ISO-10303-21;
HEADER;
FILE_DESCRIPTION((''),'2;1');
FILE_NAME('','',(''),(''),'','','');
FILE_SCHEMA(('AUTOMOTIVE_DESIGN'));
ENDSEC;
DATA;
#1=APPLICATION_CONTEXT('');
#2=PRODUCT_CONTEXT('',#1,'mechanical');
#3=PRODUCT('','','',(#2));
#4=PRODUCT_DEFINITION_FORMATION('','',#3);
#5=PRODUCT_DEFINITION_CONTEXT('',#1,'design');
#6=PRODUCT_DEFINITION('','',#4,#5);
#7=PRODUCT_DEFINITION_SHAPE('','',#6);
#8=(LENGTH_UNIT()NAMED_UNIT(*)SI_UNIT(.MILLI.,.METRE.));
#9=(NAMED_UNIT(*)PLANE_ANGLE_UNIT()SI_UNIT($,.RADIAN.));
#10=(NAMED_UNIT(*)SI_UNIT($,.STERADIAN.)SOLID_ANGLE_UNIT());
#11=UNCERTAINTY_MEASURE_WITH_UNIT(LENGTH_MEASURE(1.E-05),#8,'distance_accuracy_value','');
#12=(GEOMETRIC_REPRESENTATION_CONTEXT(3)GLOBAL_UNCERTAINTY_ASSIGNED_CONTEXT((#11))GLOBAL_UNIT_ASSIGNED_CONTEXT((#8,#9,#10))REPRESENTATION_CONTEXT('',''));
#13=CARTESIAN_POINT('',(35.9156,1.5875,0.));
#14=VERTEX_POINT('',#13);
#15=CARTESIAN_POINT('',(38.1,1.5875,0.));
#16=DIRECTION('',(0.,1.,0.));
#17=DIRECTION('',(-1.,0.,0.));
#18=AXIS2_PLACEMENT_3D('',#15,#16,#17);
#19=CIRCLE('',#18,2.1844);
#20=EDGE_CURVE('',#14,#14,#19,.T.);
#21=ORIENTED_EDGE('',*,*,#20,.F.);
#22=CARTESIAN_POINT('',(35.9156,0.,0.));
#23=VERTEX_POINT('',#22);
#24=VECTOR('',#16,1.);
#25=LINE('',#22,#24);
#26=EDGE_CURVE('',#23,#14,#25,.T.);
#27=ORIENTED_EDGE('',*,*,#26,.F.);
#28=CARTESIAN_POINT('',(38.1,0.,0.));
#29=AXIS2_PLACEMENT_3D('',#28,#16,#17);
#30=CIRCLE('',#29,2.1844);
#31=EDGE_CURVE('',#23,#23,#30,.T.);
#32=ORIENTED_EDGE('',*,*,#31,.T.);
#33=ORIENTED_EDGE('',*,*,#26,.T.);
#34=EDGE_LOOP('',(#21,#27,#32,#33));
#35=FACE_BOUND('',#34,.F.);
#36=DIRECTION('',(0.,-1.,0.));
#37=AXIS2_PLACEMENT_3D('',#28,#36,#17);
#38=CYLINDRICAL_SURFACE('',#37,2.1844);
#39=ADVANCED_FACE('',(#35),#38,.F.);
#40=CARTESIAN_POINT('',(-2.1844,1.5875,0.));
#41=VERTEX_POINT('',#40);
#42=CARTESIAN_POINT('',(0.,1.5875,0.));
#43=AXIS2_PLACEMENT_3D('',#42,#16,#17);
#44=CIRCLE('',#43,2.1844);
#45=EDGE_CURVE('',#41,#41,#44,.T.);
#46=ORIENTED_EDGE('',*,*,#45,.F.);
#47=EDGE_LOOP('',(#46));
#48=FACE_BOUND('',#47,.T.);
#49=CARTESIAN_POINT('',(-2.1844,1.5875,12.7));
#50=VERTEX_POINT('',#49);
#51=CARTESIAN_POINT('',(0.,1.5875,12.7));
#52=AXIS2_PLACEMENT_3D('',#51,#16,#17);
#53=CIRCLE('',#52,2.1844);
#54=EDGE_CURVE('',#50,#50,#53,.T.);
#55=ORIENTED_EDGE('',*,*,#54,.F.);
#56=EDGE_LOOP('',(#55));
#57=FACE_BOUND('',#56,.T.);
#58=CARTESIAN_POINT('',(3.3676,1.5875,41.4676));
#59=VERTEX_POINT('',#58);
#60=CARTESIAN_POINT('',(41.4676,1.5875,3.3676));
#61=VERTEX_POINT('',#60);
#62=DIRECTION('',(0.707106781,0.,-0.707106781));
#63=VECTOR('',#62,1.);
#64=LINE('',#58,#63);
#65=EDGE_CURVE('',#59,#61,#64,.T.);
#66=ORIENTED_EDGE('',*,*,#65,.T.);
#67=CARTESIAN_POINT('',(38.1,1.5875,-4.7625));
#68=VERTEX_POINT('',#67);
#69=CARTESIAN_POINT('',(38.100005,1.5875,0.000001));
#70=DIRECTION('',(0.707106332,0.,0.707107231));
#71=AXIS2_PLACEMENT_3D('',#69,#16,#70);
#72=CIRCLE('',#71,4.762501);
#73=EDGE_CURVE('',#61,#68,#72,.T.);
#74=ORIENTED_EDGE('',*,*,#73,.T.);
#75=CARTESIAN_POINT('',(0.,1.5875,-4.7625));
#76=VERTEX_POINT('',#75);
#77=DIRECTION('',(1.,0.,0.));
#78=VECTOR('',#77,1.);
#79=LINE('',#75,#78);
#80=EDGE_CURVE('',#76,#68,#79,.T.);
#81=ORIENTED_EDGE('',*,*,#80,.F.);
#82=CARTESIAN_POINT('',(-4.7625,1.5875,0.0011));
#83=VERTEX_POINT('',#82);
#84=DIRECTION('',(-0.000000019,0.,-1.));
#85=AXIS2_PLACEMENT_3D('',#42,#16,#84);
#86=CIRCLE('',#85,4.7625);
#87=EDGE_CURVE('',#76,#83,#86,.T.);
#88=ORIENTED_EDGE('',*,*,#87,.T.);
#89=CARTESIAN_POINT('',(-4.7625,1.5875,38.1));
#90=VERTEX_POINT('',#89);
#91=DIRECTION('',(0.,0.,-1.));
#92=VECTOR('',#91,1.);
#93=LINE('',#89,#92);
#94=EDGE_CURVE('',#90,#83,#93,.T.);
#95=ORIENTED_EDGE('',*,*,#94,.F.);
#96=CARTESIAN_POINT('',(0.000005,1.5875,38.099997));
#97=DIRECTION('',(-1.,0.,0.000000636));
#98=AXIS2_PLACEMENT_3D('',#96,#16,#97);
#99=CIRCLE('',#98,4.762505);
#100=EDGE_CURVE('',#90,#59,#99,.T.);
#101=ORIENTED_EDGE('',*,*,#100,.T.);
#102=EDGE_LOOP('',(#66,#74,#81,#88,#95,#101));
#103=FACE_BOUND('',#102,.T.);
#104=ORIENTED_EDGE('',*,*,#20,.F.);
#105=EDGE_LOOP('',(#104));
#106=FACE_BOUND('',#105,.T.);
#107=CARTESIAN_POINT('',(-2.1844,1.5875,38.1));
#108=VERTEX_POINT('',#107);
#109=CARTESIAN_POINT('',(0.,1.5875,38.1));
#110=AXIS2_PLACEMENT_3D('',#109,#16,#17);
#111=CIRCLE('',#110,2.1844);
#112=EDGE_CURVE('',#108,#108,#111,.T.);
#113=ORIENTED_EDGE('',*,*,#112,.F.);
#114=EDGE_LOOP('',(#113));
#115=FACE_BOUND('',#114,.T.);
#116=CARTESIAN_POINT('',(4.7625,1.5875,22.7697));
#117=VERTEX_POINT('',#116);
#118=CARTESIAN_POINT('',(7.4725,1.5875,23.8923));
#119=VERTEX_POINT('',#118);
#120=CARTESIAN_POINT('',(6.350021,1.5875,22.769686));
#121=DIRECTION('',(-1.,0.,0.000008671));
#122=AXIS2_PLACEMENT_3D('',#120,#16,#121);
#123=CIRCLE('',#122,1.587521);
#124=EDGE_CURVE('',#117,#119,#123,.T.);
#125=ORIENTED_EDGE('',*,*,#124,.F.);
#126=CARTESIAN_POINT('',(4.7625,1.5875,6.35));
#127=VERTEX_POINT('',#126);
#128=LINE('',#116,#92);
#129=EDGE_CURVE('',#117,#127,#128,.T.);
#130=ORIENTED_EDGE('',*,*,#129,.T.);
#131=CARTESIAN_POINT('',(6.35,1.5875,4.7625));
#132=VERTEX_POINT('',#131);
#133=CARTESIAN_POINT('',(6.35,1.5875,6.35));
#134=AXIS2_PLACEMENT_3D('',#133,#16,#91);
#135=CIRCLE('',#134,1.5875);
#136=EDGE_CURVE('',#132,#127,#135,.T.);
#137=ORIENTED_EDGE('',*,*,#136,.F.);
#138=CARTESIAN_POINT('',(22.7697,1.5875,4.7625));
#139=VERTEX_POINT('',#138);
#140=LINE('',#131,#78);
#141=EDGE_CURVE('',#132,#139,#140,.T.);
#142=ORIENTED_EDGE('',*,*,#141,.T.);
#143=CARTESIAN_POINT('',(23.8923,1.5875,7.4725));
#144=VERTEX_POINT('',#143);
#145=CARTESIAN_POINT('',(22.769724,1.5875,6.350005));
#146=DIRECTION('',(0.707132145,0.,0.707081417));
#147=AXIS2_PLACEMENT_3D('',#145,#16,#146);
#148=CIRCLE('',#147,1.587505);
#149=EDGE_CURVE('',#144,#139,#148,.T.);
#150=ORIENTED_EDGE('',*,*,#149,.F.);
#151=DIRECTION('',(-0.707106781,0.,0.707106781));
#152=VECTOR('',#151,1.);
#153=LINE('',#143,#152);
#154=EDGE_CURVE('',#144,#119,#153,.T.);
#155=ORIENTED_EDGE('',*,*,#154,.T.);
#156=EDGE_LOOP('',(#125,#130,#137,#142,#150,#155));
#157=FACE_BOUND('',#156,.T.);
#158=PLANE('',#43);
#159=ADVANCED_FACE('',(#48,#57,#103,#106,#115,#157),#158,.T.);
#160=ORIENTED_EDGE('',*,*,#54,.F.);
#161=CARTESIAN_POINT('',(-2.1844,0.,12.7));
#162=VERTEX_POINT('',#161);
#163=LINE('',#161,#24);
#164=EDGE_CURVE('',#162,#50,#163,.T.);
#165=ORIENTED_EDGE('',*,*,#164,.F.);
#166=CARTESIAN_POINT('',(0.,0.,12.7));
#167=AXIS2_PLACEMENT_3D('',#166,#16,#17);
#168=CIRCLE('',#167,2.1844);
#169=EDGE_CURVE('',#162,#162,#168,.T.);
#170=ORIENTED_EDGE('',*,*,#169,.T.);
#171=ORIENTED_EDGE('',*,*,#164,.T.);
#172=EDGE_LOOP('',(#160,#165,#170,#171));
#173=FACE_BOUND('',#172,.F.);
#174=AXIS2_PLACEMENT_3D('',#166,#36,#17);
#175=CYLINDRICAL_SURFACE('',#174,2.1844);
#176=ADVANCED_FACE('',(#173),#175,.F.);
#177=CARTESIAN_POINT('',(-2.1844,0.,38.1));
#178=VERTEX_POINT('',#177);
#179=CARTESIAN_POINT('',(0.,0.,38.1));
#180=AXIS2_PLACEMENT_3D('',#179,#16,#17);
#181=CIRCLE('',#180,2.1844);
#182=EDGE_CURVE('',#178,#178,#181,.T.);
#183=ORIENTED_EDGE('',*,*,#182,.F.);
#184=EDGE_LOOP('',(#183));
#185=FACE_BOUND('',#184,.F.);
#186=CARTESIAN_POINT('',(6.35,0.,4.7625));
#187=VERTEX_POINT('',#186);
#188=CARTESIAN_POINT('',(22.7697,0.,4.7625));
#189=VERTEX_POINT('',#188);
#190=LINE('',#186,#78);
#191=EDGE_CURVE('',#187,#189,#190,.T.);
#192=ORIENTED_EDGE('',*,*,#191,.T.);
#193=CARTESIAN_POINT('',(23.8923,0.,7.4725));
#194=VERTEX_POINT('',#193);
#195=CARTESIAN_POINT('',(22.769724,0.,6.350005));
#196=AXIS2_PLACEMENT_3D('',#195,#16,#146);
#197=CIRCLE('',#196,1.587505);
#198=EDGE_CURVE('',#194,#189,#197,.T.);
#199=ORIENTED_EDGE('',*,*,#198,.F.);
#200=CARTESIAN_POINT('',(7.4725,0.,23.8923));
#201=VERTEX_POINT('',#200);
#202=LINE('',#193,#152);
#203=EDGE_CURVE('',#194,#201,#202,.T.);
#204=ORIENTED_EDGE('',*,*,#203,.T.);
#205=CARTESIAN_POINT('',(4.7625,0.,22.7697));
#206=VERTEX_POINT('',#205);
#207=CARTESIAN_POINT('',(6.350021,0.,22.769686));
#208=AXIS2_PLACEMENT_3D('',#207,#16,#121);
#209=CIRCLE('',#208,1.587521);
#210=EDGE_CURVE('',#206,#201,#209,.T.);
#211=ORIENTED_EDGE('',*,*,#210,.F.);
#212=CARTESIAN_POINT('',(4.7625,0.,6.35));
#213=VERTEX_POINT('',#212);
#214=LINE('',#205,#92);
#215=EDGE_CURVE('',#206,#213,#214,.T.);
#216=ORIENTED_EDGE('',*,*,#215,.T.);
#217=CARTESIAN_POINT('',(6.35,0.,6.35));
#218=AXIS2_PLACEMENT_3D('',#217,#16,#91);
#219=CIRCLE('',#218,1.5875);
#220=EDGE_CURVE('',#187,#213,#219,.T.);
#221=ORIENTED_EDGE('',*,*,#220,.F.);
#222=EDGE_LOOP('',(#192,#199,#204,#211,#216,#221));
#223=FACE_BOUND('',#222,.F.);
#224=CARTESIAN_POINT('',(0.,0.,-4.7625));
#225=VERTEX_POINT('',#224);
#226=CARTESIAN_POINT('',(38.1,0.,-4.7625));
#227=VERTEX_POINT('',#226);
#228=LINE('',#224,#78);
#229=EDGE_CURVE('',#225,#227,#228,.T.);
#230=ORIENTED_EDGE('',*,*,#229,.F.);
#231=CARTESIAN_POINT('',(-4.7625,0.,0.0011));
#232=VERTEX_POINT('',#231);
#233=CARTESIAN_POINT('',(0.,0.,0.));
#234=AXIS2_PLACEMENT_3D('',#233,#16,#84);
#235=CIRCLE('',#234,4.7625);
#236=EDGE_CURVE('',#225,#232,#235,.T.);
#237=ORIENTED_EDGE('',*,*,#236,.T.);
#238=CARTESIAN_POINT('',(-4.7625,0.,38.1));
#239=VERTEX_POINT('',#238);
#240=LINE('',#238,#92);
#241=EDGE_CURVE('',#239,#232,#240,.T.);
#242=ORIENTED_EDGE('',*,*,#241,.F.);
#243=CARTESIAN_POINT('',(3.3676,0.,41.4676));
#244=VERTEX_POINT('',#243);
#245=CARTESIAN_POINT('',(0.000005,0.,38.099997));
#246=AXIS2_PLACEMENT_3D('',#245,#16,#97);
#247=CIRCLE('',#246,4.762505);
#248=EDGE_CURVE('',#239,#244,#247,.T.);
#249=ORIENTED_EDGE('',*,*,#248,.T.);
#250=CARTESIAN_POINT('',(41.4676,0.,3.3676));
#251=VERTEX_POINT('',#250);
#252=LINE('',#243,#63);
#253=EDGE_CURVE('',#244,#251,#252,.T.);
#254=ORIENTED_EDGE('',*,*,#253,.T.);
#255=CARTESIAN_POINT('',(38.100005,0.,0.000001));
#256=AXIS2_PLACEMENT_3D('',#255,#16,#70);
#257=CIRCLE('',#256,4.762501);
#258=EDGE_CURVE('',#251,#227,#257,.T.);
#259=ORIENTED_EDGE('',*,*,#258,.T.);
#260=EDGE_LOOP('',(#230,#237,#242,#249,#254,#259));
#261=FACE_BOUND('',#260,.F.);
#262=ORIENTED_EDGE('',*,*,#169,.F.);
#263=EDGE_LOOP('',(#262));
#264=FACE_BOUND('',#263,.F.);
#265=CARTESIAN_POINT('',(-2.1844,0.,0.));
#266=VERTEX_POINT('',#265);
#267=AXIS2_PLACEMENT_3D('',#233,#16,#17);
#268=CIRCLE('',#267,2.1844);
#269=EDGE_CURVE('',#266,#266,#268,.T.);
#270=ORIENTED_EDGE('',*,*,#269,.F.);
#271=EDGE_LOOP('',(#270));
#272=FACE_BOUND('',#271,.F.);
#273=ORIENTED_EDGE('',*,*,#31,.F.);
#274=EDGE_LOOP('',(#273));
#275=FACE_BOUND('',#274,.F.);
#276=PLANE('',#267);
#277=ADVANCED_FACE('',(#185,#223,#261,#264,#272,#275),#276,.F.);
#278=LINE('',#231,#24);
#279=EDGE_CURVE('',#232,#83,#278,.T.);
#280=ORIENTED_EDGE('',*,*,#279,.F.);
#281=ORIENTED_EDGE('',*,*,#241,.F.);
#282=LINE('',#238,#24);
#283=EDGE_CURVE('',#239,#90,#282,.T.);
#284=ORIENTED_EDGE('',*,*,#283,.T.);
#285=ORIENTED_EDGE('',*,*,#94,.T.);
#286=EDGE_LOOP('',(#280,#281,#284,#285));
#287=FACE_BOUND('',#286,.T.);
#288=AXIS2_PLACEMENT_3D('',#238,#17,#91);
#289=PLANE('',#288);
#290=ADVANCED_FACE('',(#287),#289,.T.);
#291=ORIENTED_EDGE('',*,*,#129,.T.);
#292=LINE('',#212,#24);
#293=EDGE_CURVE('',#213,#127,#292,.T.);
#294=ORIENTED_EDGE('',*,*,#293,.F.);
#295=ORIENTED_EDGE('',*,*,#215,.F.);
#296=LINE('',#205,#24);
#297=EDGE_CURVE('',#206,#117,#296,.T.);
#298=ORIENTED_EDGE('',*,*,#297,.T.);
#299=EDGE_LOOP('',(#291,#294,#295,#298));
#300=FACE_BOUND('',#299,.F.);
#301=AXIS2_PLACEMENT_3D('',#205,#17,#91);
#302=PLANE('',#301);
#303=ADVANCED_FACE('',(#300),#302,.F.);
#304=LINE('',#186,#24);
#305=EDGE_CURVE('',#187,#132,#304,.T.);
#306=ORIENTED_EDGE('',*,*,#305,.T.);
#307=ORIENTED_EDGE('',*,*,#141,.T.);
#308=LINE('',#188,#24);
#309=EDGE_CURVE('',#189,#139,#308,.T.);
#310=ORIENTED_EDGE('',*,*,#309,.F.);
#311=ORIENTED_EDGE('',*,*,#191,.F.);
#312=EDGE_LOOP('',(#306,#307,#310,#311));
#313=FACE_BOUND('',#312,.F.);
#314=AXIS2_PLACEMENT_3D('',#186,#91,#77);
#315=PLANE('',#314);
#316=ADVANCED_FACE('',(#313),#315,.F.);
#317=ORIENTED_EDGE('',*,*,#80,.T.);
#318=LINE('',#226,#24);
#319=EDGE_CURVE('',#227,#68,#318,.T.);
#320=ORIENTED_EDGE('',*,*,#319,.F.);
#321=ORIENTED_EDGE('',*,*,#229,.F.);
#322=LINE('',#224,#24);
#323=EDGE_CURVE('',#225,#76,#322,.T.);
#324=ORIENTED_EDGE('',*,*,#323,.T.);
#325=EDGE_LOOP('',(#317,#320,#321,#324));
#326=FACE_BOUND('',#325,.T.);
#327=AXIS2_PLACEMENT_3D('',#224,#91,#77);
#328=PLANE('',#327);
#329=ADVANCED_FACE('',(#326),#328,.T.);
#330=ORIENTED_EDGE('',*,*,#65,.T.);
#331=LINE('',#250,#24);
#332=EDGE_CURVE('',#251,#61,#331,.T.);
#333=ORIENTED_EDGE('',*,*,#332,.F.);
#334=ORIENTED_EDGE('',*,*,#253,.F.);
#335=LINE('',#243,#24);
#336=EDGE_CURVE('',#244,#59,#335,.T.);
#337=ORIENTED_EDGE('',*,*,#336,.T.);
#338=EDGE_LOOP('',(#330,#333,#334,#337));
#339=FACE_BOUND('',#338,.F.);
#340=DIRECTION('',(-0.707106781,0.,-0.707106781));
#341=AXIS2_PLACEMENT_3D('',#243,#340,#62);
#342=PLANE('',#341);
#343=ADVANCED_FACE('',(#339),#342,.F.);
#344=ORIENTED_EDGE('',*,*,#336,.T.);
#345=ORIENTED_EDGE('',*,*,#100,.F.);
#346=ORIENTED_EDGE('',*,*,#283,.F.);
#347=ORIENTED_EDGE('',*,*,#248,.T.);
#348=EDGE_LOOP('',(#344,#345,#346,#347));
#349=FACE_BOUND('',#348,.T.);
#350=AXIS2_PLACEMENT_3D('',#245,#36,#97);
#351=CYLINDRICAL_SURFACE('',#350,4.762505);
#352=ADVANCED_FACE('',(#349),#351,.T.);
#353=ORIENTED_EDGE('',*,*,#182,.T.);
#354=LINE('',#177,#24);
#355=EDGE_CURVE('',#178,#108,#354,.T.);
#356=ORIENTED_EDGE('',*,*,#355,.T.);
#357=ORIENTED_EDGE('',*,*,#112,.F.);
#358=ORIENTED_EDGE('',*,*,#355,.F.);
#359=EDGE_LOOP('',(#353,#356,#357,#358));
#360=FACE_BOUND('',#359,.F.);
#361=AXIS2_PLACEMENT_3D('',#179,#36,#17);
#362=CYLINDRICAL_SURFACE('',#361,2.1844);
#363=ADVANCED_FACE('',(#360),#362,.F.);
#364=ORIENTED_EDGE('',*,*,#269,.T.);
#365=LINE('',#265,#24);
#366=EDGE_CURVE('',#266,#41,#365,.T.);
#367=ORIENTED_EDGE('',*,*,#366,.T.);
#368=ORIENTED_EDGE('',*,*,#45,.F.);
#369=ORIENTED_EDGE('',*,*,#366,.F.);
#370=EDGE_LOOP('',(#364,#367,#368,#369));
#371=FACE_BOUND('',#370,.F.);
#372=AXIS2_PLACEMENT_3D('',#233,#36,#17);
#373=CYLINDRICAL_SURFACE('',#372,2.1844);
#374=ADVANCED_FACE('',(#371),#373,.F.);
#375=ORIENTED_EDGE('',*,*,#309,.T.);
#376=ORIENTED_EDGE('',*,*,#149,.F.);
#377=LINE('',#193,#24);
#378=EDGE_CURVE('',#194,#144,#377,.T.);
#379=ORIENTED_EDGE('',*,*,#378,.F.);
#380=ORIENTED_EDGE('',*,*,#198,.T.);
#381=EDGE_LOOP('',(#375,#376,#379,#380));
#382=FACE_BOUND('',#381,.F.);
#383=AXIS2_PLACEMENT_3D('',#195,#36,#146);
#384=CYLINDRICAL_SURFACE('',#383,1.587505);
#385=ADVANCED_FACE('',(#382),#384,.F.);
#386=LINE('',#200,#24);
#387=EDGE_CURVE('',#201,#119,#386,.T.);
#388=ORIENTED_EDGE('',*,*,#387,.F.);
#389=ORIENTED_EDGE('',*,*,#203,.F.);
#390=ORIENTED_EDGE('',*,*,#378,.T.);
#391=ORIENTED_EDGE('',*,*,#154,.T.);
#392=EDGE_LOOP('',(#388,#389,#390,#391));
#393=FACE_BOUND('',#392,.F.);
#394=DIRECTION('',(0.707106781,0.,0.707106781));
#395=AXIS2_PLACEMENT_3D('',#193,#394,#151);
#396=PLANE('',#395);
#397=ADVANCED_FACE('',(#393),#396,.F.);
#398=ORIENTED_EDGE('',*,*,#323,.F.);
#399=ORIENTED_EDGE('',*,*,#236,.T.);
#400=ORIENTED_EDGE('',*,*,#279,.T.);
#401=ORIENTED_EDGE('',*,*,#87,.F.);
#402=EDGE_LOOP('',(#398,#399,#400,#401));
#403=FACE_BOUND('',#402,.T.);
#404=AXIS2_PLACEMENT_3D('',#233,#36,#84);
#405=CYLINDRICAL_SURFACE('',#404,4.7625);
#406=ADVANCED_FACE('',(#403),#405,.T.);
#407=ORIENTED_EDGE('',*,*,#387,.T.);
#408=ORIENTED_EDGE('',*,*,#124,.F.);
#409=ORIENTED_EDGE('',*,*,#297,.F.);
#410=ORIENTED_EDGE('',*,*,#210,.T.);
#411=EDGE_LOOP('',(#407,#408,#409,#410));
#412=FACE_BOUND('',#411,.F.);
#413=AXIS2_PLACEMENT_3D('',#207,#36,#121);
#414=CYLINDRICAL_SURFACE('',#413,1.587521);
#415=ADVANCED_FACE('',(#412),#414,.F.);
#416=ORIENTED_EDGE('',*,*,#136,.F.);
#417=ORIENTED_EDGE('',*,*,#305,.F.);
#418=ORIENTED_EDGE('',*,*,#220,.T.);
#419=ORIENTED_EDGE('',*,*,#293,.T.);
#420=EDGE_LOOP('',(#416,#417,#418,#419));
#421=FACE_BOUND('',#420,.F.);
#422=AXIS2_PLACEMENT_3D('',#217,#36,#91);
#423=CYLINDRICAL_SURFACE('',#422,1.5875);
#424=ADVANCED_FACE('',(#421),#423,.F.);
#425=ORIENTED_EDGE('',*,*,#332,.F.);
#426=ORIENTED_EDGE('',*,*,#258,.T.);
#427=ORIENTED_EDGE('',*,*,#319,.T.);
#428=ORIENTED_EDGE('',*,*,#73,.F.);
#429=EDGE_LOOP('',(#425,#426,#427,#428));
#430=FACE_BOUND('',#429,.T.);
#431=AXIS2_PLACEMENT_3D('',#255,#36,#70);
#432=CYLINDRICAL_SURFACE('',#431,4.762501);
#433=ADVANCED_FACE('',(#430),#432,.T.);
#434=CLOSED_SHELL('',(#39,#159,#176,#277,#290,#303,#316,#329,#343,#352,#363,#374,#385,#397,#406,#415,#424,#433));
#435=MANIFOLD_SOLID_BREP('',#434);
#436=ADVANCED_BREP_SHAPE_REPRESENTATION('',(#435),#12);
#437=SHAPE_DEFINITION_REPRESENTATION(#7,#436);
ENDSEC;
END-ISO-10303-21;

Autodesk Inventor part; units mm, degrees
ref_plane "YZ Plane" through (0, 0, 0) normal (1, 0, 0) x (0, 1, 0)
ref_plane "XZ Plane" through (0, 0, 0) normal (0, 1, 0) x (-1, 0, 0)
ref_plane "XY Plane" through (0, 0, 0) normal (0, 0, 1) x (1, 0, 0)
sketch "main" plane through (0, 0, 0) normal (0, 0, 1) x (1, 0, 0)
  circle A0 centre (19.7324, 21.1672) radius 2.1844
  circle A1 centre (19.7324, -16.9328) radius 2.1844
  circle A2 centre (-18.3676, -16.9328) radius 2.1844
  arc A3 (24.4949, 21.1672) -> (16.3648, 24.5348) centre (19.7324, 21.1672) ccw
  arc A4 (-21.7352, -13.5652) -> (-18.3676, -21.6953) centre (-18.3676, -16.9328) ccw
  arc A5 (19.7324, -21.6953) -> (24.4949, -16.9317) centre (19.7324, -16.9328) ccw
  line L0 (19.7324, -21.6953) -> (-18.3676, -21.6953)
  line L1 (24.4949, 21.1672) -> (24.4949, -16.9317)
  line L2 (16.3648, 24.5348) -> (-21.7352, -13.5652)
  line L3 (13.3824, -12.1703) -> (-3.0373, -12.1703)
  line L4 (-4.1599, -9.4602) -> (12.2599, 6.9595)
  line L5 (14.9699, 5.837) -> (14.9699, -10.5828)
  arc A6 (13.3824, -12.1703) -> (14.9699, -10.5828) centre (13.3824, -10.5828) ccw
  arc A7 (14.9699, 5.837) -> (12.2599, 6.9595) centre (13.3824, 5.837) ccw
  arc A8 (-4.1599, -9.4602) -> (-3.0373, -12.1703) centre (-3.0373, -10.5828) ccw
  circle A9 centre (19.7324, -4.2328) radius 2.1844
  point P0 (6.6792, -3.8964)
  dimension "d0" = 9.525
  dimension "d1" = 9.525
  dimension "d2" = 9.525
  dimension "d5" = 9.525
  dimension "d6" = 1.5875
  dimension "d7" = 1.5875
  dimension "d11" = 4.3688
sketch "Sketch1" plane through (0, 0, 0) normal (0, 1, 0) x (-1, 0, 0)
  circle A0 centre (0, 38.1) radius 2.1844
  circle A1 centre (0, 0) radius 2.1844
  circle A2 centre (-38.1, 0) radius 2.1844
  arc A3 (4.7625, 38.1) -> (-3.3676, 41.4676) centre (0, 38.1) ccw
  arc A4 (-41.4676, 3.3676) -> (-38.1, -4.7625) centre (-38.1, 0) ccw
  arc A5 (0, -4.7625) -> (4.7625, 0.0011) centre (0, 0) ccw
  line L0 (0, -4.7625) -> (-38.1, -4.7625)
  line L1 (4.7625, 38.1) -> (4.7625, 0.0011)
  line L2 (-3.3676, 41.4676) -> (-41.4676, 3.3676)
  line L3 (-6.35, 4.7625) -> (-22.7697, 4.7625)
  line L4 (-23.8923, 7.4725) -> (-7.4725, 23.8923)
  line L5 (-4.7625, 22.7697) -> (-4.7625, 6.35)
  arc A6 (-6.35, 4.7625) -> (-4.7625, 6.35) centre (-6.35, 6.35) ccw
  arc A7 (-4.7625, 22.7697) -> (-7.4725, 23.8923) centre (-6.35, 22.7697) ccw
  arc A8 (-23.8923, 7.4725) -> (-22.7697, 4.7625) centre (-22.7697, 6.35) ccw
  circle A9 centre (0, 12.7) radius 2.1844
extrude "Extrusion1" add sketch "Sketch1" along normal blind 1.5875
properties part number "right_angle_gusset" material "Acetal Resin, White"
